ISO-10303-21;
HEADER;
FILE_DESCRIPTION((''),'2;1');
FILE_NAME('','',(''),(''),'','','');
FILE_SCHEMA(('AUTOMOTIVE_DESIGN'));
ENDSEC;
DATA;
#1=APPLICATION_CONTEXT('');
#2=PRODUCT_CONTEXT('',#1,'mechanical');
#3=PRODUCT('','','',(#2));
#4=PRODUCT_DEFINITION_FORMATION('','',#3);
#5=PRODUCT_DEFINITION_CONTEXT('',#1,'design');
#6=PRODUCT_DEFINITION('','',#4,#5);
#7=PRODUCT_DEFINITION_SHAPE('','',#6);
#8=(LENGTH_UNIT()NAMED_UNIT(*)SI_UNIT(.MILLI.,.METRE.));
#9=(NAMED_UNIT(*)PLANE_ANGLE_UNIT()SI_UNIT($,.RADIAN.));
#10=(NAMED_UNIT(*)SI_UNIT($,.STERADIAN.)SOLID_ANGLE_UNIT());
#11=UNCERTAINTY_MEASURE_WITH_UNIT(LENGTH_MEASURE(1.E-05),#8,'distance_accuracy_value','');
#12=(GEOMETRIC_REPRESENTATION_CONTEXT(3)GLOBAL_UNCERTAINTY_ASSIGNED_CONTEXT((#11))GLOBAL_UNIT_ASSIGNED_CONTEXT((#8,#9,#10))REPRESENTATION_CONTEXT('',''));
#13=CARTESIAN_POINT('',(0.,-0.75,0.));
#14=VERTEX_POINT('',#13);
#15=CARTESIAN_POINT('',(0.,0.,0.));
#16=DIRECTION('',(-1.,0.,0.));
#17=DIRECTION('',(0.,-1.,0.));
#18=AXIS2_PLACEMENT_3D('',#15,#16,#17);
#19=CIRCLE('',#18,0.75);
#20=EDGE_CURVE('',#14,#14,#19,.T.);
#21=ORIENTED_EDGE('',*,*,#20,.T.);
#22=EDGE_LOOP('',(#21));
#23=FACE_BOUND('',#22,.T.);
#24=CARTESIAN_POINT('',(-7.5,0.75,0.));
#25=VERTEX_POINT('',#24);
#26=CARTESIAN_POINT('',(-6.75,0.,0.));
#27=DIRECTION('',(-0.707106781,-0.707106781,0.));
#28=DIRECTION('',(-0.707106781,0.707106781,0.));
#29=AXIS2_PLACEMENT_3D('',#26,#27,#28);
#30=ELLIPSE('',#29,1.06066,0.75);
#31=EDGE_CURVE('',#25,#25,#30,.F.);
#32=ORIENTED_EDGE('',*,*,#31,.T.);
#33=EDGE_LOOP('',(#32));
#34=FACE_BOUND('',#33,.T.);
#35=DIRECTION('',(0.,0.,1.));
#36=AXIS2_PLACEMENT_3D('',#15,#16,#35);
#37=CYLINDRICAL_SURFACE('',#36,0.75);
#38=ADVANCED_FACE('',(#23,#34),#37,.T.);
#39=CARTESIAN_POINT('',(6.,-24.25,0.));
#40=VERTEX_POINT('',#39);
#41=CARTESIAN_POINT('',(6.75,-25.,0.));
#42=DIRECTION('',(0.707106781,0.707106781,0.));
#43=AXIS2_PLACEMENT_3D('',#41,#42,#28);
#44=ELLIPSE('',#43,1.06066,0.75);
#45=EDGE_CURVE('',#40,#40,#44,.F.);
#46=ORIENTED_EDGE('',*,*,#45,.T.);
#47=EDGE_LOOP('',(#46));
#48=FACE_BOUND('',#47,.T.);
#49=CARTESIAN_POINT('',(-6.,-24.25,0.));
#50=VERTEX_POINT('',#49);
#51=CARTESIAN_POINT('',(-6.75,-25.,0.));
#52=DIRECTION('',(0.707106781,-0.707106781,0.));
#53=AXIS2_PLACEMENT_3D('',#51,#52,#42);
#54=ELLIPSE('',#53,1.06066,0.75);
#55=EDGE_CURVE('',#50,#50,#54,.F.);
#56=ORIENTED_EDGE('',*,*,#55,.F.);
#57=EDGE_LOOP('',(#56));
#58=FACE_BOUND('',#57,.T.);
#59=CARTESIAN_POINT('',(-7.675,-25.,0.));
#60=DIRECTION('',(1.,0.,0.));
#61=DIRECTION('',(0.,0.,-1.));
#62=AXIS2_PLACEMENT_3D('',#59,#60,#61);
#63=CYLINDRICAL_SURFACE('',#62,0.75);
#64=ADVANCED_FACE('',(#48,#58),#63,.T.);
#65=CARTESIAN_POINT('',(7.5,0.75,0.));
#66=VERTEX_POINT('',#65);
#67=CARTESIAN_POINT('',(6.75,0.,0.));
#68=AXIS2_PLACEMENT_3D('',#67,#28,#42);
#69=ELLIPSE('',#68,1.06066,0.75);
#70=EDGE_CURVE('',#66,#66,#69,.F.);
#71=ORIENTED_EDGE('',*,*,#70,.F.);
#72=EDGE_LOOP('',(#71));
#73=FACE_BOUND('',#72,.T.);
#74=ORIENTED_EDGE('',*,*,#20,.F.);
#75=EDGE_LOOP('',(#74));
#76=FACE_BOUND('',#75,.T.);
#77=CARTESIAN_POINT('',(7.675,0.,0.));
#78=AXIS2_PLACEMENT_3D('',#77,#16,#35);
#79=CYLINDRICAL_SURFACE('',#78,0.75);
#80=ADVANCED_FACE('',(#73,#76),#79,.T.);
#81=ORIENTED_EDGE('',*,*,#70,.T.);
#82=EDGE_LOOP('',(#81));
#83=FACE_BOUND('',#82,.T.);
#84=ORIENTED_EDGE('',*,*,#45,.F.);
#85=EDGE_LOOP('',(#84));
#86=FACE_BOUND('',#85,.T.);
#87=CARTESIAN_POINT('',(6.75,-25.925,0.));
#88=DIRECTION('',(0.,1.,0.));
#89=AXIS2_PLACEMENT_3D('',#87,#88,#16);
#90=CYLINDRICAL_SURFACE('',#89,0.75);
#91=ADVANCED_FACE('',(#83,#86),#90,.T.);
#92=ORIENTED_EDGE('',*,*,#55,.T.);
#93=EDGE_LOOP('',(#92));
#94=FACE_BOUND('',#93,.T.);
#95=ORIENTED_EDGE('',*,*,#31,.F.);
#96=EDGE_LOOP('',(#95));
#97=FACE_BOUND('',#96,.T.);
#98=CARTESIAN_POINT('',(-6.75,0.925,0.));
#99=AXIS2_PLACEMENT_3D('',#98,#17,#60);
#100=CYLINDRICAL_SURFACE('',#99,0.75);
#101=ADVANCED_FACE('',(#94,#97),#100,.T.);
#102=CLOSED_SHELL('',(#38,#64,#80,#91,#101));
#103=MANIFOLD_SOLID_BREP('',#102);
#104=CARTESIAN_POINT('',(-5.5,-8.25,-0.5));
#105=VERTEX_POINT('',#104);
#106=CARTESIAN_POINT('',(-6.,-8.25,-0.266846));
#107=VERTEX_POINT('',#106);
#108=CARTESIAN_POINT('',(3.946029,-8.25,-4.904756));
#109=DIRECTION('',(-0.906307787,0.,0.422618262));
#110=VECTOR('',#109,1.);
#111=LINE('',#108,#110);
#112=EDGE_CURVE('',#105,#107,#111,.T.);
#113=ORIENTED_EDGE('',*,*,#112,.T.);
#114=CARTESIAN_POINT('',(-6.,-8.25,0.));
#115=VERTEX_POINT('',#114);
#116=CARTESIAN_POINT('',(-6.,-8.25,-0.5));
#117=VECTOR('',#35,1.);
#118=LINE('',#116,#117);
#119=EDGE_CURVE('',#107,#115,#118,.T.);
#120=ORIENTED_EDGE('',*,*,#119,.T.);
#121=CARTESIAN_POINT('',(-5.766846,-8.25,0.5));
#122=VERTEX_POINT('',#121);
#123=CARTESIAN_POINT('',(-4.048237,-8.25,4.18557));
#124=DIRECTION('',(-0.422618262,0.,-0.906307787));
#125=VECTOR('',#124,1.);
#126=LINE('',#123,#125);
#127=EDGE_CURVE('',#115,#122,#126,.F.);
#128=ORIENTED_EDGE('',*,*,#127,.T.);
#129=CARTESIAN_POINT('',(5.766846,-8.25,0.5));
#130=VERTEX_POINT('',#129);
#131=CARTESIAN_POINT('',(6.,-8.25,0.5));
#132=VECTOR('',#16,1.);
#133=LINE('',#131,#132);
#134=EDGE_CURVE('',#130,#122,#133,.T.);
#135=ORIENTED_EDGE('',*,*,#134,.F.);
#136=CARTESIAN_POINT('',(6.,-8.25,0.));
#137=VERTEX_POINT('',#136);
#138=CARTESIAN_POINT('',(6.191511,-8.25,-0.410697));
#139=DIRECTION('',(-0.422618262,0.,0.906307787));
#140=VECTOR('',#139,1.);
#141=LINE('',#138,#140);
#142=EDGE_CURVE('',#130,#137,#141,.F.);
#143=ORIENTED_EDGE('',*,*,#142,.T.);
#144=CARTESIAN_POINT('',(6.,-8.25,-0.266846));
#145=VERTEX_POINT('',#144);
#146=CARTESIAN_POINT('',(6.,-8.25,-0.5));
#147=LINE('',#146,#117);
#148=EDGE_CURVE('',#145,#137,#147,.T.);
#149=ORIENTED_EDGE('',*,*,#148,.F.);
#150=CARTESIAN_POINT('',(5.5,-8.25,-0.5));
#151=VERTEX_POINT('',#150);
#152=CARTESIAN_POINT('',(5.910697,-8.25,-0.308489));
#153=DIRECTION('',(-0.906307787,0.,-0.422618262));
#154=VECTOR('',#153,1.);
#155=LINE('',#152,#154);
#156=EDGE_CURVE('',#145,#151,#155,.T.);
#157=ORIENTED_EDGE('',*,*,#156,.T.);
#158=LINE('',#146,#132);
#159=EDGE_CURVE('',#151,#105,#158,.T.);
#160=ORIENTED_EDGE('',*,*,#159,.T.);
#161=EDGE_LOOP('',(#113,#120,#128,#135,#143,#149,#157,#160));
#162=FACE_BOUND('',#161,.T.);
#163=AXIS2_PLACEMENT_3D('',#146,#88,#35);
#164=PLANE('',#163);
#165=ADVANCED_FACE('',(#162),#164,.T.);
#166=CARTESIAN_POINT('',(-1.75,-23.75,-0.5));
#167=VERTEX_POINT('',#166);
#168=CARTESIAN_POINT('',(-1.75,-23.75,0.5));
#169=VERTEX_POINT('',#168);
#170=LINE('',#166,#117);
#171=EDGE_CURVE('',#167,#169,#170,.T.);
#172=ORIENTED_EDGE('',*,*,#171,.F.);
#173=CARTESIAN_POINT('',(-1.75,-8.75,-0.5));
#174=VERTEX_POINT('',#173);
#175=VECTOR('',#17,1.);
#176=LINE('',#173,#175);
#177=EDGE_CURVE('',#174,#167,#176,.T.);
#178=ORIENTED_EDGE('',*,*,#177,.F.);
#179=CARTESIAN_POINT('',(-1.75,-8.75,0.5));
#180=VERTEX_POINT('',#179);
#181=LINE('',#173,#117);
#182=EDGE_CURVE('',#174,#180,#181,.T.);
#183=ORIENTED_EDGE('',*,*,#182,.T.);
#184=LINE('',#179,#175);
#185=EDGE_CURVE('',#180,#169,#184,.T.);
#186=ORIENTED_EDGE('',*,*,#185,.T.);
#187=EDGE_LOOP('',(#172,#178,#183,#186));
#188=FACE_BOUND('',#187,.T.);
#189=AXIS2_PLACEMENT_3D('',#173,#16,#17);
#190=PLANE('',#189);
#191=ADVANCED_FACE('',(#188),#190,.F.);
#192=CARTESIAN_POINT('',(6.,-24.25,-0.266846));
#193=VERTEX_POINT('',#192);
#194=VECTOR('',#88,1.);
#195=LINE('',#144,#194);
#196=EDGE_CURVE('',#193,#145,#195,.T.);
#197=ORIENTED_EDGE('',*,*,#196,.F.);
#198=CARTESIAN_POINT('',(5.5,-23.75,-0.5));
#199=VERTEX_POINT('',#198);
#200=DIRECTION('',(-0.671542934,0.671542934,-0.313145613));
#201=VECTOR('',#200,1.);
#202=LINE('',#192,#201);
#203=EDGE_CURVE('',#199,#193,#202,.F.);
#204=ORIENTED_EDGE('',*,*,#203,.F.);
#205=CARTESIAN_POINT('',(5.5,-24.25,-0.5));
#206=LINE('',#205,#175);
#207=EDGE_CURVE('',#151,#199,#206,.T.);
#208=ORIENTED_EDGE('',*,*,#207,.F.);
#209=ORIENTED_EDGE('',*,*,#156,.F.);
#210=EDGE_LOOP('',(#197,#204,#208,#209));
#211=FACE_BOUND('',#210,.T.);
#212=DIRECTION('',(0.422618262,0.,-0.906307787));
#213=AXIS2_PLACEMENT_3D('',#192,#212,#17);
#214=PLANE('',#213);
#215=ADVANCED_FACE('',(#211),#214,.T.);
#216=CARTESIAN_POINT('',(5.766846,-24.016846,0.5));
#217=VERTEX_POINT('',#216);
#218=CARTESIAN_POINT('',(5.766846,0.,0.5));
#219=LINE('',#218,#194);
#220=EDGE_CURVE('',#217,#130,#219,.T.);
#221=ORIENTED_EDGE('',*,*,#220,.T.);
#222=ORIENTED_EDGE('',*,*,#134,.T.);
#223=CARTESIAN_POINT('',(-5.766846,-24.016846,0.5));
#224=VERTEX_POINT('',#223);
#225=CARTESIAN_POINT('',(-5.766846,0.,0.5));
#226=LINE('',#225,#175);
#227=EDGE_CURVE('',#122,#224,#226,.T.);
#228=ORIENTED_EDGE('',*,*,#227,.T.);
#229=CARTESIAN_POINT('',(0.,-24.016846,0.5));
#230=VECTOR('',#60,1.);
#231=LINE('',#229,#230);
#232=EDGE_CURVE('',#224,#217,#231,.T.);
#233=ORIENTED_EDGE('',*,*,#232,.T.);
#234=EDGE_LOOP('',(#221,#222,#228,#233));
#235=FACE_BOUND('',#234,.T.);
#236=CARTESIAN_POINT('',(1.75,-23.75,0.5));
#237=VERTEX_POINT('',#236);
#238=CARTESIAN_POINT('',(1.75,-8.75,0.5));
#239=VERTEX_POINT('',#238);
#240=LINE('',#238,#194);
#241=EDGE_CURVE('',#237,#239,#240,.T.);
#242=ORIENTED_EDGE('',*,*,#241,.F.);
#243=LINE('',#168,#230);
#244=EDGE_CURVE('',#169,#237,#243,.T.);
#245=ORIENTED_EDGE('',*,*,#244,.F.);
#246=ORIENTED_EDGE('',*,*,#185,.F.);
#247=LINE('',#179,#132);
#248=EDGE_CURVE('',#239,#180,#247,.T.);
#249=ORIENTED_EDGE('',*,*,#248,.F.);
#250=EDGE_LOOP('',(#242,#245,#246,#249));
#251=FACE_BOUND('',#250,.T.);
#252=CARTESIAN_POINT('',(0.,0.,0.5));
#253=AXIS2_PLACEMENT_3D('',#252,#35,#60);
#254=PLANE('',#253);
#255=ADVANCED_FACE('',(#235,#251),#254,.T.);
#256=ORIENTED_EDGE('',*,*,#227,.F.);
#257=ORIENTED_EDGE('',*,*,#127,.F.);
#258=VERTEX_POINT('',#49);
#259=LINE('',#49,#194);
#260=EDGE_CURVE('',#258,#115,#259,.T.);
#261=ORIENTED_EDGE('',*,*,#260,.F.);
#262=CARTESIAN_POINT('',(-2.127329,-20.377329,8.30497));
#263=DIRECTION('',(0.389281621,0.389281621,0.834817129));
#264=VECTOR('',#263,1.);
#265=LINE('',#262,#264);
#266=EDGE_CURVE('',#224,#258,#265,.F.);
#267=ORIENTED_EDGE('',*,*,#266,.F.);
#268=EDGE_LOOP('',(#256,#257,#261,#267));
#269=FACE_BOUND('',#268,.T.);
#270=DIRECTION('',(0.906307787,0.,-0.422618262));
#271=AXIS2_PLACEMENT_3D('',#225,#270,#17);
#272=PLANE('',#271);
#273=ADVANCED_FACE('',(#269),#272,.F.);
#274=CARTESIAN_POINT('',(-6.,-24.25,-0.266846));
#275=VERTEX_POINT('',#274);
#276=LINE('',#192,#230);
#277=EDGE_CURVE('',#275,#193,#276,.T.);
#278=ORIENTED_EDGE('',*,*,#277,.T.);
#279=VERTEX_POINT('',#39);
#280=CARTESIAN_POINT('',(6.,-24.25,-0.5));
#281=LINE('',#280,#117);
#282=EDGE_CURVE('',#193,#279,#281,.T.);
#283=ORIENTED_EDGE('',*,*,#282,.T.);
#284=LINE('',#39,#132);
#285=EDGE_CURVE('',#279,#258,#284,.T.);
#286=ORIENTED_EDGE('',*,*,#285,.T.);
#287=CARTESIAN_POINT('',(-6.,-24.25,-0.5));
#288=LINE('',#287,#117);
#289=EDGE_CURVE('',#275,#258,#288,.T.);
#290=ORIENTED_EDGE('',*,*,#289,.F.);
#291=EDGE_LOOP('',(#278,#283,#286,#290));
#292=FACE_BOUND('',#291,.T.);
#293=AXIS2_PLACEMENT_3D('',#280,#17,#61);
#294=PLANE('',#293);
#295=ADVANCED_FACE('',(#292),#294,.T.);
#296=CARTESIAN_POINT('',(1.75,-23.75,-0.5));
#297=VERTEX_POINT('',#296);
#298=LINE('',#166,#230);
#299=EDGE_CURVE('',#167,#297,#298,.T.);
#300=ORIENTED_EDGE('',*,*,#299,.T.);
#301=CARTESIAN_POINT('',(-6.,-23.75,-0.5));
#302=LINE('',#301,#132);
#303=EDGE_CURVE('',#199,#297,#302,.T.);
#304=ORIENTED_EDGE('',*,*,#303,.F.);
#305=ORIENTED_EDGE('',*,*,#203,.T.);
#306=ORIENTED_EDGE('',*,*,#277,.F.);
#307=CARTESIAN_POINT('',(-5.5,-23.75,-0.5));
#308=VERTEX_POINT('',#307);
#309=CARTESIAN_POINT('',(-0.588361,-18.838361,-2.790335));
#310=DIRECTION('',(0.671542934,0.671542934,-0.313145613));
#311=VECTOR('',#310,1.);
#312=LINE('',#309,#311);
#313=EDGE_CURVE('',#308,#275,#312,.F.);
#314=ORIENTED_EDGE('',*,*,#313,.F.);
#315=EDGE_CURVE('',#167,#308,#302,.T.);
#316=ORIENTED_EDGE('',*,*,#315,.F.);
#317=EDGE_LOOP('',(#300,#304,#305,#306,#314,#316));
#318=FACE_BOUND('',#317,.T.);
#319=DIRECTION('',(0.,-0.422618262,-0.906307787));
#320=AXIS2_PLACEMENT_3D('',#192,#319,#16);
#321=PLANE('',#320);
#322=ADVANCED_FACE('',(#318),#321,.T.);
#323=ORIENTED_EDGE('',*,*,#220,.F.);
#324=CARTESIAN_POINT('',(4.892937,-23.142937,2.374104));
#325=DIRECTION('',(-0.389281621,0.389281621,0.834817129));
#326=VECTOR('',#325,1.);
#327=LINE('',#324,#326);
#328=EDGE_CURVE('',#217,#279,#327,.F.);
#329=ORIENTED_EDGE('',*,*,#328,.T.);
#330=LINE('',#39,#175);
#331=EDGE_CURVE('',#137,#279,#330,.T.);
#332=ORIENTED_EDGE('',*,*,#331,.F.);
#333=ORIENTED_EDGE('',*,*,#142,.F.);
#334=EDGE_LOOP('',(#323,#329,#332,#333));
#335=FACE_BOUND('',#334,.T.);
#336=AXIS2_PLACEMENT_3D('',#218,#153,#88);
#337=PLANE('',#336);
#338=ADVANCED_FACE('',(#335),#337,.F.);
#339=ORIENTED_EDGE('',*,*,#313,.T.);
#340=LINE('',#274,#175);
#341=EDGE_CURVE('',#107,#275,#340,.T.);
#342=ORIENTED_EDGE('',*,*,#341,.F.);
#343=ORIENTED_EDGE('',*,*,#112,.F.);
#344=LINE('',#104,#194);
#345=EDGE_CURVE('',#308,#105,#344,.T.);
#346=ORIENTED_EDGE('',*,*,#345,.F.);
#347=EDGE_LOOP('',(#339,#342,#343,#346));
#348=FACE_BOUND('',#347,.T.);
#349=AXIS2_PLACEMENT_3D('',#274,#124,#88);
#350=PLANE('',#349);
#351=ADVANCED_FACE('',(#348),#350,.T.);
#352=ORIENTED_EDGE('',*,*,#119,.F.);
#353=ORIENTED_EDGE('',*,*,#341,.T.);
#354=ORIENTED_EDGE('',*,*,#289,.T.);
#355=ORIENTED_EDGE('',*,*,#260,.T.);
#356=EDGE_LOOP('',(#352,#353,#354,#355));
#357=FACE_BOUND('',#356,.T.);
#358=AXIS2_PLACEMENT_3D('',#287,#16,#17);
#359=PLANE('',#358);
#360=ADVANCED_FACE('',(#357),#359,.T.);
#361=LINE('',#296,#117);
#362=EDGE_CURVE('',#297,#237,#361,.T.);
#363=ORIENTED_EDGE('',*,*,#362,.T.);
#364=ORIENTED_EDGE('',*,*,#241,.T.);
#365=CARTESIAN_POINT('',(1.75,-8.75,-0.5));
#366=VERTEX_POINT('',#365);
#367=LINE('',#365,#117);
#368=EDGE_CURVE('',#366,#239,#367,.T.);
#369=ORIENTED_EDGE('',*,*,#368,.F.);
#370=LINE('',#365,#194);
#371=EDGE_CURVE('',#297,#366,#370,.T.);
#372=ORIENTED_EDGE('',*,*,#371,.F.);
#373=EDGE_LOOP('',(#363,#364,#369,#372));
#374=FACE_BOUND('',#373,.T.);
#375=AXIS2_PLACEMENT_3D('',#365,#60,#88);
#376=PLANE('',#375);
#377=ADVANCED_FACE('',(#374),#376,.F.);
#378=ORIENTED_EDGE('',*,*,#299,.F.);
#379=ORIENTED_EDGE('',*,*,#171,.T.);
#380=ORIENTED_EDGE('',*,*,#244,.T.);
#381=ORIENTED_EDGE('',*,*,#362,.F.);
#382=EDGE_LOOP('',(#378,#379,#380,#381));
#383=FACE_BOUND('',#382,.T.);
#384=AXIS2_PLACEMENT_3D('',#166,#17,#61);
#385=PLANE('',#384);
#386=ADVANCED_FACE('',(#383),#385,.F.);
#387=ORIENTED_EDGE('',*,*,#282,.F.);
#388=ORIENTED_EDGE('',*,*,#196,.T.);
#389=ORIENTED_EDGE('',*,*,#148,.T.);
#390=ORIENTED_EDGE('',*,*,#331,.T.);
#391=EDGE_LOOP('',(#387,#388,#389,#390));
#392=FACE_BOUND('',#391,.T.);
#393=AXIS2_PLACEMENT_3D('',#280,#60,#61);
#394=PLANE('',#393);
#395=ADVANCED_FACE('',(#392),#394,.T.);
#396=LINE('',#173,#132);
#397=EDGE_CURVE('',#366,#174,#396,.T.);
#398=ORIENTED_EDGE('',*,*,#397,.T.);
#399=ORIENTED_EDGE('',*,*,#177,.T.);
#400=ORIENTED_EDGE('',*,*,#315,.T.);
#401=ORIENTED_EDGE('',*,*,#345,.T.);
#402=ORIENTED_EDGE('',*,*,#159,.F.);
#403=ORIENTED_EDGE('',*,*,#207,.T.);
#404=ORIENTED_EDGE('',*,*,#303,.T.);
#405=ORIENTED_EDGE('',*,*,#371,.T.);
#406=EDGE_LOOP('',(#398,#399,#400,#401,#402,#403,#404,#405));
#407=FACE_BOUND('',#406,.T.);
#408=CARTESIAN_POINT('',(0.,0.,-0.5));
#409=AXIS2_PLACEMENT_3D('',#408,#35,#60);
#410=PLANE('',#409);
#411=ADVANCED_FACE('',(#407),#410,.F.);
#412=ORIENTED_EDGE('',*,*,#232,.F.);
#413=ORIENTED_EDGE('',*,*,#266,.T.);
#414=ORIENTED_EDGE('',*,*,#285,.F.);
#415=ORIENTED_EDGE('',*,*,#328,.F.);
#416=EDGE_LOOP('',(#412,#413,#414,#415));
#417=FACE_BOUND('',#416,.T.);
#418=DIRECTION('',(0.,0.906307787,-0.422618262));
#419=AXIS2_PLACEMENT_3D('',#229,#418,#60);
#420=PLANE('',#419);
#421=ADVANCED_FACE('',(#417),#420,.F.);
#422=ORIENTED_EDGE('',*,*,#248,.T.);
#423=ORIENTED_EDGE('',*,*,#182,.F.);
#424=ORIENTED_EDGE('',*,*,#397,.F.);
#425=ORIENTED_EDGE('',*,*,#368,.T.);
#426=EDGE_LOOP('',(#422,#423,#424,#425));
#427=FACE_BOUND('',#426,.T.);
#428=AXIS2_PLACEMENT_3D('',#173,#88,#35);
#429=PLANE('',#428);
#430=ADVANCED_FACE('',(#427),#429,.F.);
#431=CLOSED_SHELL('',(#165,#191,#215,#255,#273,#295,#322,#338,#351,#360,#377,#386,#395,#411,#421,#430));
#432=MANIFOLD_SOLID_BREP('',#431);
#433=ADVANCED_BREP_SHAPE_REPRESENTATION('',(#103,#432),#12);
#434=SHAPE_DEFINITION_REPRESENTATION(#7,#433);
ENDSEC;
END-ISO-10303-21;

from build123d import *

# Parameters (mm, degrees)
SWEEP1_PROFILE_R         = 0.75
BOSS_EXTRUDE1_DEPTH      = 0.5
BOSS_EXTRUDE1_DEPTH_BACK = 0.5
SKETCH15_W               = 12
SKETCH15_H               = 16
SKETCH15_W_2             = 3.5
SKETCH15_H_2             = 15
CHAMFER1_SIZE            = 0.5
CHAMFER1_SIZE_2          = 0.233153829


with BuildPart() as part:
    # Sweep1: sweep along a path in Sketch1
    with BuildLine(Plane.XY) as sweep1_path:
        Line((0, 0), (-6.75, 0))
        Line((-6.75, 0), (-6.75, -25))
        Line((-6.75, -25), (6.75, -25))
        Line((6.75, -25), (6.75, 0))
        Line((6.75, 0), (0, 0))
    # Sweep1 profile (on start of the path) → Sweep1 (sweep)
    with BuildSketch(Plane(origin=(0, 0, 0), x_dir=(0, 0, -1), z_dir=(-1, 0, 0))):
        Circle(SWEEP1_PROFILE_R)
    sweep(path=sweep1_path.line, transition=Transition.RIGHT)


with BuildPart() as body_2:
    # Sketch15 → Boss-Extrude1 (new, two sides: drawn at the far end of the back side and taken through both)
    with BuildSketch(Plane.XY.offset(-BOSS_EXTRUDE1_DEPTH_BACK)):
        with Locations((0, -16.25)):
            Rectangle(SKETCH15_W, SKETCH15_H)
        with Locations((0, -16.25)):
            Rectangle(SKETCH15_W_2, SKETCH15_H_2, mode=Mode.SUBTRACT)
    extrude(amount=BOSS_EXTRUDE1_DEPTH + BOSS_EXTRUDE1_DEPTH_BACK)

    # Chamfer1
    # the kernel refuses this chamfer: 0.5, 0.233153829 mm, written as the material it takes off along each edge
    with BuildSketch(Plane(origin=(-6, -25.545487736, -0.5), x_dir=(0.9998669641130704, 0, -0.016311164131110275), z_dir=(0, 1, 0)), Plane(origin=(6, -6.954512264, 0.5), x_dir=(0.016311164131110483, 0, -0.9998669641130704), z_dir=(0, -1, 0)), Plane(origin=(-6, -25.545487736, 0.5), x_dir=(-0.016311164131110483, 0, -0.9998669641130704), z_dir=(0, 1, 0))) as chamfer1_piece_1:
        Polygon((CHAMFER1_SIZE * 0.999866964113, -CHAMFER1_SIZE * 0.0163111641311), (-CHAMFER1_SIZE_2 * 0.0163111641365, -CHAMFER1_SIZE_2 * 0.999866964445), (0, 0), align=None)
    extrude(amount=18.590975471, mode=Mode.SUBTRACT)
    with BuildSketch(Plane(origin=(7.295487736, -24.25, -0.5), x_dir=(0, -0.07481330637060621, 0.9971975577536769), z_dir=(-1, 0, 0))) as chamfer1_piece_2:
        Polygon((CHAMFER1_SIZE_2 * 0.997197558085, CHAMFER1_SIZE_2 * 0.0748133063955), (-CHAMFER1_SIZE * 0.0748133063706, CHAMFER1_SIZE * 0.997197557754), (0, 0), align=None)
    extrude(amount=14.590975471, mode=Mode.SUBTRACT)
    with BuildSketch(Plane(origin=(6, -6.954512264, -0.5), x_dir=(0.07481330637059892, 0, 0.9971975577536775), z_dir=(0, -1, 0))) as chamfer1_piece_3:
        Polygon((CHAMFER1_SIZE_2 * 0.997197558085, CHAMFER1_SIZE_2 * 0.0748133063955), (-CHAMFER1_SIZE * 0.0748133063706, CHAMFER1_SIZE * 0.997197557754), (0, 0), align=None)
    extrude(amount=18.590975471, mode=Mode.SUBTRACT)
    with BuildSketch(Plane(origin=(7.295487736, -24.25, 0.5), x_dir=(0, -0.01631116413110877, -0.9998669641130704), z_dir=(-1, 0, 0))) as chamfer1_piece_4:
        Polygon((CHAMFER1_SIZE * 0.999866964113, -CHAMFER1_SIZE * 0.0163111641311), (-CHAMFER1_SIZE_2 * 0.0163111641365, -CHAMFER1_SIZE_2 * 0.999866964445), (0, 0), align=None)
    extrude(amount=14.590975471, mode=Mode.SUBTRACT)


solid = Compound([part.part, body_2.part])
